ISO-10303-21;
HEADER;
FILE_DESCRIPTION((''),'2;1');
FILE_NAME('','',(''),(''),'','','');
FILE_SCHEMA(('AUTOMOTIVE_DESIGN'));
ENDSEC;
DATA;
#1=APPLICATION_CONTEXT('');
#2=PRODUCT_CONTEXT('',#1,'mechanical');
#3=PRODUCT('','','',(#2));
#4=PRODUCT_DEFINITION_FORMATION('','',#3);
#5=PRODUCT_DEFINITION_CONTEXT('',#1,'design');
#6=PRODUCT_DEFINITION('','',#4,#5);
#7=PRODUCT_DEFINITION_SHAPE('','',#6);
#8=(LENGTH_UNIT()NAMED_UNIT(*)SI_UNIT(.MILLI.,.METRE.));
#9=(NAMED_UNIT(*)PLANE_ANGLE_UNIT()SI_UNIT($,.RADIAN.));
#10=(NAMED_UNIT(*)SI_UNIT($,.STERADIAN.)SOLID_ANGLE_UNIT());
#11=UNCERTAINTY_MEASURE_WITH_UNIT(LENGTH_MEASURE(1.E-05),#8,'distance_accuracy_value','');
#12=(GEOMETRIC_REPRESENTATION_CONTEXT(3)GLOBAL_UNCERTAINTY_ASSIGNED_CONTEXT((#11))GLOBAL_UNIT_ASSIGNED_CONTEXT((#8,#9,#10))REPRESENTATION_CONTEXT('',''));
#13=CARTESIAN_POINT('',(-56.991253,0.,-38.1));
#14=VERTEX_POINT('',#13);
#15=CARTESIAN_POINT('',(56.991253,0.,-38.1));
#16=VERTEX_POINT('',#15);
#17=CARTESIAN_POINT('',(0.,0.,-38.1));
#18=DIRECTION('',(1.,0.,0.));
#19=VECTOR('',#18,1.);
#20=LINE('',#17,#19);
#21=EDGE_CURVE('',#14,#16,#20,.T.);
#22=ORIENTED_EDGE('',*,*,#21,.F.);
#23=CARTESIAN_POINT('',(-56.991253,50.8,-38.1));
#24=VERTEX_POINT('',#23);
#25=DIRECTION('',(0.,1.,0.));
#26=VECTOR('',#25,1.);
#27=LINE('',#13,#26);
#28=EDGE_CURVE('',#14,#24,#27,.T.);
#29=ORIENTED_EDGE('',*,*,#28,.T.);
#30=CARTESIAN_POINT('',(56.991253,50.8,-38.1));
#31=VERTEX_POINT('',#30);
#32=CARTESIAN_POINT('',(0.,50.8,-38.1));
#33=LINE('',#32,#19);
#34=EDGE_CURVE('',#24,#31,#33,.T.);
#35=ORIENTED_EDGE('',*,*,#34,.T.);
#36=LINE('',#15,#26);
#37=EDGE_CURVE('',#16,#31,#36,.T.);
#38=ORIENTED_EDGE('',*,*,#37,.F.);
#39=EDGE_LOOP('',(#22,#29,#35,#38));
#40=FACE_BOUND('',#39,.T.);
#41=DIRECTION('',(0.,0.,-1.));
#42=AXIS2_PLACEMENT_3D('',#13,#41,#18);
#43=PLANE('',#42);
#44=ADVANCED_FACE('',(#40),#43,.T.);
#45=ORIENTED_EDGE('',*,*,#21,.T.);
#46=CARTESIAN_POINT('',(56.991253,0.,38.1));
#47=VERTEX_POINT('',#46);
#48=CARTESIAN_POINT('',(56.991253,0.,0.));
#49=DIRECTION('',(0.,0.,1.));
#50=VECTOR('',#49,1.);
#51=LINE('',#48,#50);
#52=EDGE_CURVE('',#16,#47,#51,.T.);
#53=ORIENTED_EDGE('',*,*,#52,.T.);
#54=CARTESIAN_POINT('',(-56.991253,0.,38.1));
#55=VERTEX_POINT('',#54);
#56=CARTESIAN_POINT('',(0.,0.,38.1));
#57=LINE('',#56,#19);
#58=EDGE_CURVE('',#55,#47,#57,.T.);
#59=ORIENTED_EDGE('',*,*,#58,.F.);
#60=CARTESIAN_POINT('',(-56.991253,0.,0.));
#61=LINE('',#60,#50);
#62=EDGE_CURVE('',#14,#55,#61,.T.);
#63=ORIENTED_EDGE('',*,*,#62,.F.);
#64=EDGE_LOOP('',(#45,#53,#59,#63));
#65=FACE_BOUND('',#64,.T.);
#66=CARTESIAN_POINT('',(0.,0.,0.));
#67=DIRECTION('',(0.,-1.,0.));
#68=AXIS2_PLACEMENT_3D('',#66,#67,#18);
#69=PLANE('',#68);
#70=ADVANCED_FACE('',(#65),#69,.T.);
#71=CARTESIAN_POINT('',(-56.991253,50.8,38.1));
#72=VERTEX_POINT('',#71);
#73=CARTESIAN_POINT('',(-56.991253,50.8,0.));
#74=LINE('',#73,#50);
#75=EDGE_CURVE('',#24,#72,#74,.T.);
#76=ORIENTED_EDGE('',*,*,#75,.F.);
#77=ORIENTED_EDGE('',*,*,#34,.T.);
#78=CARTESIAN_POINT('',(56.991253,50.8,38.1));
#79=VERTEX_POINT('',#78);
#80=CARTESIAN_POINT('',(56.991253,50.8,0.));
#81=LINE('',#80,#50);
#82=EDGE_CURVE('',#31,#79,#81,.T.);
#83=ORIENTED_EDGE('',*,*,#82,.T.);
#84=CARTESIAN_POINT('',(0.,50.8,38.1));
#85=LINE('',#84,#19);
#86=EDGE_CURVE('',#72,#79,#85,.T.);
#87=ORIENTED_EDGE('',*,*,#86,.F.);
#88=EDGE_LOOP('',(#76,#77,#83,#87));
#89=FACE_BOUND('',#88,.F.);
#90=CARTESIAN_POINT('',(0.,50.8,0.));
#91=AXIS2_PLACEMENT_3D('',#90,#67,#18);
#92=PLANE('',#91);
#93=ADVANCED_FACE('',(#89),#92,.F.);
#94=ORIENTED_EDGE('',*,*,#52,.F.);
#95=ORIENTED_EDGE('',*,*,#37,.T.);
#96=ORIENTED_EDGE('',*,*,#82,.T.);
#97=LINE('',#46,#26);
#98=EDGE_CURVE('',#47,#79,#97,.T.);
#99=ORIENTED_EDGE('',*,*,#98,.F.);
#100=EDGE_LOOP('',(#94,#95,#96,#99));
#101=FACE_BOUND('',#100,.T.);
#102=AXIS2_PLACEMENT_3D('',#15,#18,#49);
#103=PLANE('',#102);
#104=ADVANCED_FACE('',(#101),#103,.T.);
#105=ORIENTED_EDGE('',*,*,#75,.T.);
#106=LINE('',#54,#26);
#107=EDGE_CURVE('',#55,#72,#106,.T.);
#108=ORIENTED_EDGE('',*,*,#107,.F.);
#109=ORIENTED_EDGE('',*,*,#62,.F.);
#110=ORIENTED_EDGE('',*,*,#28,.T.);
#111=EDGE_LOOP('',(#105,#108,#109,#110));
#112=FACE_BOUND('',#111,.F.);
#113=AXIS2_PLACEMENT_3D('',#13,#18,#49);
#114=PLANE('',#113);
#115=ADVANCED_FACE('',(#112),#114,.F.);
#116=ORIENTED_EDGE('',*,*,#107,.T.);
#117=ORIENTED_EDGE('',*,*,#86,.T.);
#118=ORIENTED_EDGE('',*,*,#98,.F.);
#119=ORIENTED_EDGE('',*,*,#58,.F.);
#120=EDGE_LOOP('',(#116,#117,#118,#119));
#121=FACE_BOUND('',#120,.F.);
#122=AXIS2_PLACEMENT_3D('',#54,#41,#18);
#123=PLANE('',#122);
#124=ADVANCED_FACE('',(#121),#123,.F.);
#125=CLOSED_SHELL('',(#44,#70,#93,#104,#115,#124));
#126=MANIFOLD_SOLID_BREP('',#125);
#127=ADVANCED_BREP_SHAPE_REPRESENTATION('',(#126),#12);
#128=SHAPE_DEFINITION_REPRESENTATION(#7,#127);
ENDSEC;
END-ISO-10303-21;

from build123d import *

# Parameters (mm, degrees)
F0_W     = 113.9825060964
F0_H     = 76.2000009418
F1_DEPTH = 50.8


# Not quite as in the source:
# - the program builds the solid bodies; features that only make, move or delete a surface that nothing else refers to are left out


with BuildPart() as f1:
    # F0 (on Front) → F1 (new body)
    with BuildSketch(Plane.XZ):
        Rectangle(F0_W, F0_H)
    extrude(amount=-F1_DEPTH)


solid = f1.part
